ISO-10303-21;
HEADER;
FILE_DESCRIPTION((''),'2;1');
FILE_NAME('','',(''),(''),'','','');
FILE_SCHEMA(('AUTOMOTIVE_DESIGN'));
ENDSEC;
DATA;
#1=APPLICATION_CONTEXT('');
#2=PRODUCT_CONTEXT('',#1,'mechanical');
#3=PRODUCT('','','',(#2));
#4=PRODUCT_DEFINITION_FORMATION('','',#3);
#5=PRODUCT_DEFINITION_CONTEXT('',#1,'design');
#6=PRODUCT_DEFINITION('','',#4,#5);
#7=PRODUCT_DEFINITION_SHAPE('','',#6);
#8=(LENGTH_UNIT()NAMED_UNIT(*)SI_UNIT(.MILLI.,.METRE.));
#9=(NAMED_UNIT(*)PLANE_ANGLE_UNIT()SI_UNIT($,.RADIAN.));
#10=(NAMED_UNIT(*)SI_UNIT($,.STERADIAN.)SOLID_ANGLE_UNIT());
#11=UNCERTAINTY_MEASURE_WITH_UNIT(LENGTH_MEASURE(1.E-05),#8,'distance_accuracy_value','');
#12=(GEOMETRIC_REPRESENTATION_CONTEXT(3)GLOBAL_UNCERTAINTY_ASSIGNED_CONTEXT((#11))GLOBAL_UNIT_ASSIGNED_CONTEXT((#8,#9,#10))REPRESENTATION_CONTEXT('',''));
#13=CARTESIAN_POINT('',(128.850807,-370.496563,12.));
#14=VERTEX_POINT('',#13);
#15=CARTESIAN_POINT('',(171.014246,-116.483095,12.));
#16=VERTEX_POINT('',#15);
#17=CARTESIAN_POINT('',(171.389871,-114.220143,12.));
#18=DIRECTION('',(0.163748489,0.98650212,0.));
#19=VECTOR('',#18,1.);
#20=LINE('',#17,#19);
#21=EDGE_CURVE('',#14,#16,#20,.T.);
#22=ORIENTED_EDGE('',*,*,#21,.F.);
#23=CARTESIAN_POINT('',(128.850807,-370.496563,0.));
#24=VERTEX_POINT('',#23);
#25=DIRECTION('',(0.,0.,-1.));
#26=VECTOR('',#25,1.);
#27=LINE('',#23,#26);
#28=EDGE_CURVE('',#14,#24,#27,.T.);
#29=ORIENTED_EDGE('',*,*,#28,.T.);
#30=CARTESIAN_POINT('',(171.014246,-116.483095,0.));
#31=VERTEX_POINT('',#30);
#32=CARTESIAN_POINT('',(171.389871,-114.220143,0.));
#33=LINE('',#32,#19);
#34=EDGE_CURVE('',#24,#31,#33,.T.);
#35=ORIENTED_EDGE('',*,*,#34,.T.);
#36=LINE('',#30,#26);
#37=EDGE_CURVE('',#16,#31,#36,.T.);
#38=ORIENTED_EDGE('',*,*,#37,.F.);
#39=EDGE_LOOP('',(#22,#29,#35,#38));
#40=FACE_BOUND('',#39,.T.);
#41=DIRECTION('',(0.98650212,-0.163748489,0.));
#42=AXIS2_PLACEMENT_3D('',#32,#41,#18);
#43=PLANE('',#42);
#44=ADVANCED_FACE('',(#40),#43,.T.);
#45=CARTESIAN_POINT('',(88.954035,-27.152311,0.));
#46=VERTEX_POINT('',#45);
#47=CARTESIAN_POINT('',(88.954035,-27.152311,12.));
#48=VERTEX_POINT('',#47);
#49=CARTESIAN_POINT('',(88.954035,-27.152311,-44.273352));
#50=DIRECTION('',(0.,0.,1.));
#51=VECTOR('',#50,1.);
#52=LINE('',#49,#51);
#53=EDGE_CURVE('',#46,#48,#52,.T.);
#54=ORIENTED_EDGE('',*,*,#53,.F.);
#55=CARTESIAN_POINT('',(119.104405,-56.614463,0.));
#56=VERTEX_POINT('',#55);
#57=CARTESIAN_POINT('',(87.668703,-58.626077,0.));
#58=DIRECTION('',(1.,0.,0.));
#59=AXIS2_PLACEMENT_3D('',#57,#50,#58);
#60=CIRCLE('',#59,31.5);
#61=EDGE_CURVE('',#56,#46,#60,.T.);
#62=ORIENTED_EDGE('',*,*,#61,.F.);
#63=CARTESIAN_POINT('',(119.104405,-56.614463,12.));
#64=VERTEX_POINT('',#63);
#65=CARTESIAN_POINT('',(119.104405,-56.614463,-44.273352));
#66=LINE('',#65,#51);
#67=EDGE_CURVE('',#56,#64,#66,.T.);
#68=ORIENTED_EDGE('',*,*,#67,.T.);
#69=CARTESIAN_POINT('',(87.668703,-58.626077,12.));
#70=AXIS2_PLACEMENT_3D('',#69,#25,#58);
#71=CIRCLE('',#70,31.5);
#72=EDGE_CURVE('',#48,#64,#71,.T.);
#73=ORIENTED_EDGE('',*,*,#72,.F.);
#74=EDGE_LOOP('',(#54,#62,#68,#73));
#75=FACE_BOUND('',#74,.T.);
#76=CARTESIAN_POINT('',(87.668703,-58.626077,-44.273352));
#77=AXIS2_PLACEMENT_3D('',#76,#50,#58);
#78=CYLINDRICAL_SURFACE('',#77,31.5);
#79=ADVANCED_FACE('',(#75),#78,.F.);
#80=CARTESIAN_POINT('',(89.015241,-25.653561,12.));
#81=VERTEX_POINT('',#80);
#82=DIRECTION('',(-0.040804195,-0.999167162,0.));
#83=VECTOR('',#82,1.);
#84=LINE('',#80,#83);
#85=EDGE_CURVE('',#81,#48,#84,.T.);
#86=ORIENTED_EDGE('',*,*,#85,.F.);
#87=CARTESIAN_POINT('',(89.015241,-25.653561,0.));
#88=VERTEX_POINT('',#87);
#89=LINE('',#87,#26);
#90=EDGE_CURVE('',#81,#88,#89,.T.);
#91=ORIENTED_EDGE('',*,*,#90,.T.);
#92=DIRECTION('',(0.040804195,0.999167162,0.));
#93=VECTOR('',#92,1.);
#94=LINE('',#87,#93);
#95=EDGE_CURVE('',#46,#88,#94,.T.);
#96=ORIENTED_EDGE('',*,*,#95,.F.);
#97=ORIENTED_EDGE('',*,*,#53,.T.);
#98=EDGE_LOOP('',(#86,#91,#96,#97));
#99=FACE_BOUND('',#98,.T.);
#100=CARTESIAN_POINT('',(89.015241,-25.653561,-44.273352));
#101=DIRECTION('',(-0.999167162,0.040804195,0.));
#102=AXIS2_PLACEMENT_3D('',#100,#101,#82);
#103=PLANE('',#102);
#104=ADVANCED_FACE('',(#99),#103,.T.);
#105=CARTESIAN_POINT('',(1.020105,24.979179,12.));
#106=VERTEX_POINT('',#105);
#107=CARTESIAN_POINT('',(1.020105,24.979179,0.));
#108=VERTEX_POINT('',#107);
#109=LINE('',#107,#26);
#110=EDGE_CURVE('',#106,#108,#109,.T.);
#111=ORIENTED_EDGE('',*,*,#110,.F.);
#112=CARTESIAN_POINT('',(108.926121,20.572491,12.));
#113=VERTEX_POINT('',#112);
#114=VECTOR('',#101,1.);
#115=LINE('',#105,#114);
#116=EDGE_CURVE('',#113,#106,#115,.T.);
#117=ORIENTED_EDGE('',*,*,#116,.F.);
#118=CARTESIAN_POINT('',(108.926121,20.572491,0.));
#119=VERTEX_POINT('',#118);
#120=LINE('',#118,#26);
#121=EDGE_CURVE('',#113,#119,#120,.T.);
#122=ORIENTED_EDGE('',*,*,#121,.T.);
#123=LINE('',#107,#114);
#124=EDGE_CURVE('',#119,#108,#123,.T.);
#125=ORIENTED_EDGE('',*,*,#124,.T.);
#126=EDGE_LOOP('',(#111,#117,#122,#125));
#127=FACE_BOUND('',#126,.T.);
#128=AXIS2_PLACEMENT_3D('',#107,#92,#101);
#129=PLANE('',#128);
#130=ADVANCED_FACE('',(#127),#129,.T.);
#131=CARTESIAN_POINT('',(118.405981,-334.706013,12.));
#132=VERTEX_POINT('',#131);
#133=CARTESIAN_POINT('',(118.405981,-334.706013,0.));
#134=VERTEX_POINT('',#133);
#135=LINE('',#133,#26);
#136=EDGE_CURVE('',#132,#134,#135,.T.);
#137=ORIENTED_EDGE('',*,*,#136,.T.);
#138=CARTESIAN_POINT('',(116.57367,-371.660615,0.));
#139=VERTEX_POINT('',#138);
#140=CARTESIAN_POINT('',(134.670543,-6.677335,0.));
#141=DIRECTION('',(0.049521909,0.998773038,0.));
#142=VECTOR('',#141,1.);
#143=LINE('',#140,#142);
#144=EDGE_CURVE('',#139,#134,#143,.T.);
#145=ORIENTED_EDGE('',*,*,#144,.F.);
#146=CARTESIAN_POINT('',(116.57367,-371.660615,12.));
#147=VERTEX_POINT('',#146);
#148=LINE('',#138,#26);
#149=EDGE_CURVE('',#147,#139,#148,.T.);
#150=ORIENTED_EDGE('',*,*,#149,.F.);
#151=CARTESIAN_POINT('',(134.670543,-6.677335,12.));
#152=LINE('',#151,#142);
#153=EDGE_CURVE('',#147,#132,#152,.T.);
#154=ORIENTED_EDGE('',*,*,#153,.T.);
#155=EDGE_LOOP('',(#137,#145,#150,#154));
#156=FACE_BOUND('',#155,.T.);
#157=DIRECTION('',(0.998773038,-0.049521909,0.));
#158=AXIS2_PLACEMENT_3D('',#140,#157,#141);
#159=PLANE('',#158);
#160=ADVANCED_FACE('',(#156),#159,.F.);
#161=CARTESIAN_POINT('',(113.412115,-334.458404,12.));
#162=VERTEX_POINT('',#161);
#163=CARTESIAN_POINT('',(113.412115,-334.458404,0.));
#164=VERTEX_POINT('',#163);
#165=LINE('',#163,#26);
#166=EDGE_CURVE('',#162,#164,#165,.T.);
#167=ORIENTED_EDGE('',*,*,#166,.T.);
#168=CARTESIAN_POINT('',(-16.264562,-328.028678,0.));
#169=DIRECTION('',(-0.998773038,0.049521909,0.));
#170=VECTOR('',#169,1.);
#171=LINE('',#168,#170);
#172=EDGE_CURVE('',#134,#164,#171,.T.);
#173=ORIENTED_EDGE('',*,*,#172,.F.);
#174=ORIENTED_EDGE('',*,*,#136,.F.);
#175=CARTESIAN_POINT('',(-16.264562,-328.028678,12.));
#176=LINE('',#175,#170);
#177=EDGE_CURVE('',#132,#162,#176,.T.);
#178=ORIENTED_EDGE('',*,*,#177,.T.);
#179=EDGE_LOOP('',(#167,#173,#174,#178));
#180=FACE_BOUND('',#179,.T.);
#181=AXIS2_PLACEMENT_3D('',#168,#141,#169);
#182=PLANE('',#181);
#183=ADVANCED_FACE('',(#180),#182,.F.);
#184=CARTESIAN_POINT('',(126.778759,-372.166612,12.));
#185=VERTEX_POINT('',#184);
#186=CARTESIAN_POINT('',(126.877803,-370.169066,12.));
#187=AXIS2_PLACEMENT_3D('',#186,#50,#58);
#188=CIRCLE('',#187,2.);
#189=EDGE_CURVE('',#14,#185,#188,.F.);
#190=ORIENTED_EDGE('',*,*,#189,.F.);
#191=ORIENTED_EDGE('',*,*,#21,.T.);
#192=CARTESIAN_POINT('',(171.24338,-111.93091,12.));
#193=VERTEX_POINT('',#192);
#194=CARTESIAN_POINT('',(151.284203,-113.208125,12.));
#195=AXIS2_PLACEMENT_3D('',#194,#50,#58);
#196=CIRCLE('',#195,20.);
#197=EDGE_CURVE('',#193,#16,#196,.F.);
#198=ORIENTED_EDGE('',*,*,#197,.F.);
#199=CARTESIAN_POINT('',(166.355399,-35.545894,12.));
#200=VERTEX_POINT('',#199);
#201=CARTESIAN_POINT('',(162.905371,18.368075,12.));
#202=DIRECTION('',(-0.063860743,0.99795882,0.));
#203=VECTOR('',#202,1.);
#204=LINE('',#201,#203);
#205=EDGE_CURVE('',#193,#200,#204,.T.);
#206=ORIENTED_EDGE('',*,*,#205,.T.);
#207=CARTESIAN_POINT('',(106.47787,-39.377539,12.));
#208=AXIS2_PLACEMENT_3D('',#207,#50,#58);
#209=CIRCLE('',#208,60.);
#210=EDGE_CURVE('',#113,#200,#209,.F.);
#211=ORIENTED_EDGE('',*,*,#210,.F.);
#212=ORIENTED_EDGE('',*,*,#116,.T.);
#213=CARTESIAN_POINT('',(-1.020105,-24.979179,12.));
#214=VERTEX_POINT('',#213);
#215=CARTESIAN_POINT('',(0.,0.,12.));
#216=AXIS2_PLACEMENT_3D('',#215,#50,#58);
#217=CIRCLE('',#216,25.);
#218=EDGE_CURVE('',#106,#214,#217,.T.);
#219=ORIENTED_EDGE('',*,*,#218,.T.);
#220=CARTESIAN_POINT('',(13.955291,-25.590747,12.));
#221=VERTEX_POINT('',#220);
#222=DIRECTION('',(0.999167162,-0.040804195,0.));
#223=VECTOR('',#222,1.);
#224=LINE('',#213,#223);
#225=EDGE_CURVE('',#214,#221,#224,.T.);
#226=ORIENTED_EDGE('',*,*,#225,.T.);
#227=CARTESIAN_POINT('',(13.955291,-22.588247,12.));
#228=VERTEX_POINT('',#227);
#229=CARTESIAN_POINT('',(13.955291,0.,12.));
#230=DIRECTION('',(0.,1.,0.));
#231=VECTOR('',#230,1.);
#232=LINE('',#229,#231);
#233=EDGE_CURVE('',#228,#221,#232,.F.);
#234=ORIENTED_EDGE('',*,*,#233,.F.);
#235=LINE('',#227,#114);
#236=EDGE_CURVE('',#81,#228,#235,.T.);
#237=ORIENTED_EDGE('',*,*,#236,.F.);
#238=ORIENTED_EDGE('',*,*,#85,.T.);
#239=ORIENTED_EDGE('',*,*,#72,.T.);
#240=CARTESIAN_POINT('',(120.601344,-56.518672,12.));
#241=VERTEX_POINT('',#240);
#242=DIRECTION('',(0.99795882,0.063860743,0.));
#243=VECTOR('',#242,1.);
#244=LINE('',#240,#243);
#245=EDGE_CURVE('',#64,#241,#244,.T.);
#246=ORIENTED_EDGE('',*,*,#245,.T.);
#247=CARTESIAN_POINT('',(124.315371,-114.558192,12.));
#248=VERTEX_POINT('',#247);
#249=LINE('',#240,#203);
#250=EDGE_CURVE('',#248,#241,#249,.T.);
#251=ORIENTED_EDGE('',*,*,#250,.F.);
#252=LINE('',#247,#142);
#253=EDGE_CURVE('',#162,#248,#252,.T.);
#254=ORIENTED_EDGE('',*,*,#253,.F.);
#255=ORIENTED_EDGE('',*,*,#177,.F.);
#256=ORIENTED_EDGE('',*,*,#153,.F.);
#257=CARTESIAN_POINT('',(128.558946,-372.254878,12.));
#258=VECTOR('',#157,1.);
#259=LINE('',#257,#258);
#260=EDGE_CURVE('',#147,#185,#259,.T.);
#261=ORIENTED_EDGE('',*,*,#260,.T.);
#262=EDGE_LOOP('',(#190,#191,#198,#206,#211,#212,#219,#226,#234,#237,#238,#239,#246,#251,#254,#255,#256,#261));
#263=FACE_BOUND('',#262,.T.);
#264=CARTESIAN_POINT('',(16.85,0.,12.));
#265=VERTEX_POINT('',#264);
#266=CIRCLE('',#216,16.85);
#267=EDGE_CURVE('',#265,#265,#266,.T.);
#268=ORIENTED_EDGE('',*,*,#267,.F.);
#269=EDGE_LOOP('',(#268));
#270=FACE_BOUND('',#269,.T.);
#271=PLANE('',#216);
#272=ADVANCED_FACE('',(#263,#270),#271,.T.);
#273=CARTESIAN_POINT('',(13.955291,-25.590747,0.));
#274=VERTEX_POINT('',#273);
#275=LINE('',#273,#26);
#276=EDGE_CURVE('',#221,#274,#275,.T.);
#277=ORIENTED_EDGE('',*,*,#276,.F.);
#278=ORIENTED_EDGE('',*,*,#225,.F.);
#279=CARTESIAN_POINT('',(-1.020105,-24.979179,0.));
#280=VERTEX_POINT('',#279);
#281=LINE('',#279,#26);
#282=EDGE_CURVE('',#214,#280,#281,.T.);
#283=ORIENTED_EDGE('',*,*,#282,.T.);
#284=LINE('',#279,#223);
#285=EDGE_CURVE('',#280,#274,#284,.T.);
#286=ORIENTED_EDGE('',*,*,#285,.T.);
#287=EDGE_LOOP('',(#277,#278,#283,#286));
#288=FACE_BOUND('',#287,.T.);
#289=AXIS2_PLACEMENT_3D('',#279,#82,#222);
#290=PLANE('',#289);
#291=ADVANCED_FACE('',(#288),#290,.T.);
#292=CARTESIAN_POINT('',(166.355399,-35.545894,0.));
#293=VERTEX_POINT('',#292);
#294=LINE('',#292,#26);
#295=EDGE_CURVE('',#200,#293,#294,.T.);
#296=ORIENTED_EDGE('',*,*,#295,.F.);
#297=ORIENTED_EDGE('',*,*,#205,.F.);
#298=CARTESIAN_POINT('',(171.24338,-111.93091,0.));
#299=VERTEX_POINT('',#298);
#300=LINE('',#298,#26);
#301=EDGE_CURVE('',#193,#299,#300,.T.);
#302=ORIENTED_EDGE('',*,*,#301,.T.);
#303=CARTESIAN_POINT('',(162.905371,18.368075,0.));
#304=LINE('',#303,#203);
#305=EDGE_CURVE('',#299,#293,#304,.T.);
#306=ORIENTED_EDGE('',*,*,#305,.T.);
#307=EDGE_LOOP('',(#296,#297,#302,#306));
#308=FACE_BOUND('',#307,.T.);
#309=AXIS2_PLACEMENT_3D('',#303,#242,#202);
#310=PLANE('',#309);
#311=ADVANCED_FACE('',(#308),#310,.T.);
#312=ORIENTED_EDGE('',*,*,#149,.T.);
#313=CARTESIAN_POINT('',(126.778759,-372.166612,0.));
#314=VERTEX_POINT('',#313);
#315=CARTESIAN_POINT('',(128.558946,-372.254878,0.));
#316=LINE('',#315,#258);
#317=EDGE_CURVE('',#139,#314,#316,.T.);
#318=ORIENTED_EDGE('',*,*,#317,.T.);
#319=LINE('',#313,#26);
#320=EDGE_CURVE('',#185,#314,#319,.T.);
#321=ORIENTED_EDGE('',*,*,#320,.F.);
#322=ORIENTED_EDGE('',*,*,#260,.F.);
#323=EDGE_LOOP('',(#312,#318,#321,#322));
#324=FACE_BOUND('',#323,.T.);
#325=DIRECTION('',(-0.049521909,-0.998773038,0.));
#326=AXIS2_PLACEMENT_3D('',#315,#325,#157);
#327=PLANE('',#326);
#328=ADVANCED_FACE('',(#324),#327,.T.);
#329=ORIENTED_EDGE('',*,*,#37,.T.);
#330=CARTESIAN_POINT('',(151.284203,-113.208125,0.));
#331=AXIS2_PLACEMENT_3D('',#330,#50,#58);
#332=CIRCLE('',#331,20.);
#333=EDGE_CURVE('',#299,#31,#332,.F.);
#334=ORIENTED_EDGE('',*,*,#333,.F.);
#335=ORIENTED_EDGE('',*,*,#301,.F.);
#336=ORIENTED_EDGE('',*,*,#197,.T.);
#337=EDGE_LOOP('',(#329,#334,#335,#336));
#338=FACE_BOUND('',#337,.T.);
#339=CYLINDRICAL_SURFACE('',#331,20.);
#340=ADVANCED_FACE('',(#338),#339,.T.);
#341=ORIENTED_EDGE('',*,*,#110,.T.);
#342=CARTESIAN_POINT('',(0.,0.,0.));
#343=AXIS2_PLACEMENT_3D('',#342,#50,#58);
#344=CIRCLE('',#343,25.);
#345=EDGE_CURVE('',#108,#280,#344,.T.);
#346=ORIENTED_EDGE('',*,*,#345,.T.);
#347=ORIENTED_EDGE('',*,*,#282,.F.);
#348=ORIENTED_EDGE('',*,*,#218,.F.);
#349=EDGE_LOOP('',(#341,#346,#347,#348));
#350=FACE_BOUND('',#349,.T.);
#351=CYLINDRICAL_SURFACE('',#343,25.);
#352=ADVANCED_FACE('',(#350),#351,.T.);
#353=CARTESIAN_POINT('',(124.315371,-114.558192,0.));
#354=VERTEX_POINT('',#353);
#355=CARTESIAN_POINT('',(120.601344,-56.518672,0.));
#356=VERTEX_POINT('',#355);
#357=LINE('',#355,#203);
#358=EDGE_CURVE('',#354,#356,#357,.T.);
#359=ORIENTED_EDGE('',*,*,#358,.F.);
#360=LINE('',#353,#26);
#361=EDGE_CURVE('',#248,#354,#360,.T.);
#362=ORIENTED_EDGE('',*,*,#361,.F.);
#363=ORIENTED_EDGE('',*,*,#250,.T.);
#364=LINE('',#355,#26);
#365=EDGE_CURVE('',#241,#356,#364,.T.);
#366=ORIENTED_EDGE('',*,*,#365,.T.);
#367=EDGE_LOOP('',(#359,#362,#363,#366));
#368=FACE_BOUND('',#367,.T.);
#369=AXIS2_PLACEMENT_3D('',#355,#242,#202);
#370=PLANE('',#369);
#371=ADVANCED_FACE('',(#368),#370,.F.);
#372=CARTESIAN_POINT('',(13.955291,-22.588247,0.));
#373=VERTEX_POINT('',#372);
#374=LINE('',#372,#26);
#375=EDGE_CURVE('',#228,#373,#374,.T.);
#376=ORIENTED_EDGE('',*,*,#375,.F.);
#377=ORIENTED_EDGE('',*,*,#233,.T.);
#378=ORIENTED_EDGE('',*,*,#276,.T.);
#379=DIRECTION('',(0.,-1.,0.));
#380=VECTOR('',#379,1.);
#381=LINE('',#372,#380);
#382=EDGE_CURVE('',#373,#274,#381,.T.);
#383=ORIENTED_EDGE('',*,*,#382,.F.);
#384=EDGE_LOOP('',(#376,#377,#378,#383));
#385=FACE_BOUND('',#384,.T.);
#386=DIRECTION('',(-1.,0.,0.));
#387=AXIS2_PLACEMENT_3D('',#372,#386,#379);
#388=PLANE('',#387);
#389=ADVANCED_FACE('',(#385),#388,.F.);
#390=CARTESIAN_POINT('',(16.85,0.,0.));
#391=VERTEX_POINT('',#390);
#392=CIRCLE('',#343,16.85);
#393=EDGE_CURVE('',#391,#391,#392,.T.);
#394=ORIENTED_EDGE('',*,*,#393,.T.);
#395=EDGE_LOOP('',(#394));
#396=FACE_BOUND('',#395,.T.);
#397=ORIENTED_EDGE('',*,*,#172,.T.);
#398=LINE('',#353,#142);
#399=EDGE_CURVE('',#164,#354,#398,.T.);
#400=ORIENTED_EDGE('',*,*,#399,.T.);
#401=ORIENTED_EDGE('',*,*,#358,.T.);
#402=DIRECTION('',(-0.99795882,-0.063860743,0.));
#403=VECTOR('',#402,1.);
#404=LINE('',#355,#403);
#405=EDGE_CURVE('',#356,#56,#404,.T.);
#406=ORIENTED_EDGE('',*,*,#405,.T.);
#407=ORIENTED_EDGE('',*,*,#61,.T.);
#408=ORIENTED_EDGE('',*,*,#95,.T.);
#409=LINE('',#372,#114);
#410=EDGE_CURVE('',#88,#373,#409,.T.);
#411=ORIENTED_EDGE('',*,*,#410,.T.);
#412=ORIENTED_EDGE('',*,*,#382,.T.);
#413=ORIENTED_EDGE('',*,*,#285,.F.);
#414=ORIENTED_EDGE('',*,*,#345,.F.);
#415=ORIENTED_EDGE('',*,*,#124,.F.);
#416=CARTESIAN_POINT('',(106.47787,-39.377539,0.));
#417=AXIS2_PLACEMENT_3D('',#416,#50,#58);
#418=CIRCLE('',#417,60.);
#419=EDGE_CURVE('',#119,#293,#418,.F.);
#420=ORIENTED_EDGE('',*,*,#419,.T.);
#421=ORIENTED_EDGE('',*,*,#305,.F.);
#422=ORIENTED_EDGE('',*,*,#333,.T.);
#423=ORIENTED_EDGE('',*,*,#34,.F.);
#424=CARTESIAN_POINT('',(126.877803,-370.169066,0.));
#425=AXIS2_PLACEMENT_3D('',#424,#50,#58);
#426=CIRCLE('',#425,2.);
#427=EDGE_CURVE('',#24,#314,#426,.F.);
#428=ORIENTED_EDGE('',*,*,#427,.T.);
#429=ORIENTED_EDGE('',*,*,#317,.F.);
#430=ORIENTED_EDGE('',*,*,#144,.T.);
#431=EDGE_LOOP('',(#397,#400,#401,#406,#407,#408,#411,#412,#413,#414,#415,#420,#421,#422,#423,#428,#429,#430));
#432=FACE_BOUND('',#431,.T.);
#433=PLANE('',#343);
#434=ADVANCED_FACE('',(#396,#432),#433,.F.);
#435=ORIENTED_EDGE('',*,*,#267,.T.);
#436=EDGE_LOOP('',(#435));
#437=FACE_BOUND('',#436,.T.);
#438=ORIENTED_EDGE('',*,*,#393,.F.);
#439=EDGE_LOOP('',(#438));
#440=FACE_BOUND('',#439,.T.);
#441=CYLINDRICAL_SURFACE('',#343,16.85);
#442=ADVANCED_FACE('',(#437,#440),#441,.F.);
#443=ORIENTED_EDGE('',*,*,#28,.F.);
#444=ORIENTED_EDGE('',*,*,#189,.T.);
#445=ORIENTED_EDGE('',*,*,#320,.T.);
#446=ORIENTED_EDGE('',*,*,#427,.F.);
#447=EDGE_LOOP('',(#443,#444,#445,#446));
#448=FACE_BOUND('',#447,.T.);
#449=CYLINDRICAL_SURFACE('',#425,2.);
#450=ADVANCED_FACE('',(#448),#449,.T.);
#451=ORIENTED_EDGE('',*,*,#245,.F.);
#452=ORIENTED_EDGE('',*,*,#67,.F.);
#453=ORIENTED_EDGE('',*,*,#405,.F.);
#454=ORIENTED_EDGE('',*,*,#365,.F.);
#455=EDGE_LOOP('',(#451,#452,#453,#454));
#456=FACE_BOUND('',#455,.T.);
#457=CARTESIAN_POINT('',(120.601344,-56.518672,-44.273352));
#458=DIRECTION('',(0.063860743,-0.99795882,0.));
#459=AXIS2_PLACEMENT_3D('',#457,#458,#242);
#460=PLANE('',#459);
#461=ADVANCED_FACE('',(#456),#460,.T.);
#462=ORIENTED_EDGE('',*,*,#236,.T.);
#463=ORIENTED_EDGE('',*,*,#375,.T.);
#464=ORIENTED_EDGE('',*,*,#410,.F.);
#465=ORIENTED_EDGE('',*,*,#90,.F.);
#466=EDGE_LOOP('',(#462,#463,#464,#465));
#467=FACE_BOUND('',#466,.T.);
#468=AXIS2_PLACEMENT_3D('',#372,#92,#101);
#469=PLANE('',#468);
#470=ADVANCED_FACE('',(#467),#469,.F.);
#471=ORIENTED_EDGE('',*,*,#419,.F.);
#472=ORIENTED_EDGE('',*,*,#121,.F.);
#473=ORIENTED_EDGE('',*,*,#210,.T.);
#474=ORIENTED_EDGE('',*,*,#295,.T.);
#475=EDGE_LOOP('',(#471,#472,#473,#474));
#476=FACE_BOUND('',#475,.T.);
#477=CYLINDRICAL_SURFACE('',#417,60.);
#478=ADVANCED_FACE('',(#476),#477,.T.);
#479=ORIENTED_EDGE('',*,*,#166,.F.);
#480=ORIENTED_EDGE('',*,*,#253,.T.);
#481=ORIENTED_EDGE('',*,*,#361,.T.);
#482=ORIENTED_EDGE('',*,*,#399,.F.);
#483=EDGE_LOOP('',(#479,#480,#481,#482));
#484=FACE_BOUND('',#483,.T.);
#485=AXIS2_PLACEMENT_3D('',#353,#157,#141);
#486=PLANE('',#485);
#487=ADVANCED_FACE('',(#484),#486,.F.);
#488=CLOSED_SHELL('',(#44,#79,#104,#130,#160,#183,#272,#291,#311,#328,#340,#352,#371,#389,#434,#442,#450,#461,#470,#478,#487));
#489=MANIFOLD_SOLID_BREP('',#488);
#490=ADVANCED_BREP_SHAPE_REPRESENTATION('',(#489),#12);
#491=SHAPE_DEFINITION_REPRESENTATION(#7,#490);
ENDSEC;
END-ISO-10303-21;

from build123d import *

# Parameters (mm, degrees)
SKETCH_1_R               = 16.85
EXTRUDE_1_DEPTH          = 12
FILLET_1_R               = 30
FILLET_2_R               = 60
CUT_EXTRUDE_1_DEPTH      = 410.990466147
CUT_EXTRUDE_1_DEPTH_BACK = 410.990466147
FILLET_3_R               = 2
FILLET_4_R               = 20
CUT_EXTRUDE_2_DEPTH      = 410.868383554
CUT_EXTRUDE_2_DEPTH_BACK = 410.868383554
EXTRUDE_START            = -12
EXTRUDE_2_DEPTH          = 12


with BuildPart() as part:
    # Sketch 1 → Бобышка-Вытянуть1 (new body)
    with BuildSketch(Plane.XY):
        with BuildLine():
            Line((-1.020104874, -24.979179051), (115.882453083, -29.75326986))
            Line((115.882453083, -29.75326986), (121.310616212, -114.579769523))
            Line((121.310616212, -114.579769523), (108.583485608, -371.264440173))
            Line((108.583485608, -371.264440173), (128.558946359, -372.254878352))
            Line((128.558946359, -372.254878352), (171.389870978, -114.220142814))
            Line((171.389870978, -114.220142814), (162.905370512, 18.368075133))
            Line((162.905370512, 18.368075133), (1.020104874, 24.979179051))
            ThreePointArc((1.020104874, 24.979179051), (-24.979179051, 1.020104874), (-1.020104874, -24.979179051))
        make_face()
        Circle(SKETCH_1_R, mode=Mode.SUBTRACT)
    extrude(amount=EXTRUDE_1_DEPTH)

    # Скругление1
    fillet_1_edges = [part.edges().sort_by_distance(p)[0] for p in [
        (115.882453083, -29.75326986, 6),
    ]]
    fillet(fillet_1_edges, radius=FILLET_1_R)

    # Скругление2
    fillet_2_edges = [part.edges().sort_by_distance(p)[0] for p in [
        (162.905370512, 18.368075133, 6),
    ]]
    fillet(fillet_2_edges, radius=FILLET_2_R)

    # Sketch 2 → Вырез-Вытянуть1 (cut, two sides: drawn at the far end of the back side and taken through both)
    with BuildSketch(Plane(origin=(0, 0, 0), x_dir=(-1, 0, 0), z_dir=(0, 0, -1)).offset(-CUT_EXTRUDE_1_DEPTH_BACK)):
        Polygon((-108.583485608, -371.264440173), (-116.573669908, -371.660615445), (-118.40598054, -334.706013056), (-110.41579624, -334.309837784), align=None)
    extrude(amount=CUT_EXTRUDE_1_DEPTH + CUT_EXTRUDE_1_DEPTH_BACK, mode=Mode.SUBTRACT)

    # Скругление3
    fillet_3_edges = [part.edges().sort_by_distance(p)[0] for p in [
        (128.558946359, -372.254878352, 6),
    ]]
    fillet(fillet_3_edges, radius=FILLET_3_R)

    # Скругление4
    fillet_4_edges = [part.edges().sort_by_distance(p)[0] for p in [
        (171.389870978, -114.220142814, 6),
    ]]
    fillet(fillet_4_edges, radius=FILLET_4_R)

    # Эскиз3 → Вырез-Вытянуть2 (cut, two sides: drawn at the far end of the back side and taken through both)
    with BuildSketch(Plane.XY.offset(12).offset(-CUT_EXTRUDE_2_DEPTH_BACK)):
        with BuildLine():
            Line((13.955291323, -25.590747374), (88.892828475, -28.651061996))
            ThreePointArc((88.892828475, -28.651061996), (108.635605286, -37.16939974), (117.607467213, -56.710254576))
            Line((117.607467213, -56.710254576), (121.310616212, -114.579769523))
            Line((121.310616212, -114.579769523), (110.41579624, -334.309837784))
            Line((110.41579624, -334.309837784), (113.412115352, -334.458403511))
            Line((113.412115352, -334.458403511), (124.315371498, -114.558191921))
            Line((124.315371498, -114.558191921), (120.601343672, -56.518672348))
            ThreePointArc((120.601343672, -56.518672348), (110.732295552, -35.023732029), (89.01524106, -25.65356051))
            Line((89.01524106, -25.65356051), (13.955291323, -22.588246777))
            Line((13.955291323, -22.588246777), (13.955291323, -25.590747374))
        make_face()
    extrude(amount=CUT_EXTRUDE_2_DEPTH + CUT_EXTRUDE_2_DEPTH_BACK, mode=Mode.SUBTRACT)

    # Эскиз4 → Бобышка-Вытянуть2 (add)
    with BuildSketch(Plane.XY.offset(12).offset(EXTRUDE_START)):
        with BuildLine():
            Line((120.601343672, -56.518672348), (119.104405442, -56.614463462))
            ThreePointArc((119.104405442, -56.614463462), (109.683950419, -36.096565885), (88.954034767, -27.152311253))
            Line((88.954034767, -27.152311253), (89.01524106, -25.65356051))
            ThreePointArc((89.01524106, -25.65356051), (110.732295552, -35.023732029), (120.601343672, -56.518672348))
        make_face()
    extrude(amount=EXTRUDE_2_DEPTH)


solid = part.part
